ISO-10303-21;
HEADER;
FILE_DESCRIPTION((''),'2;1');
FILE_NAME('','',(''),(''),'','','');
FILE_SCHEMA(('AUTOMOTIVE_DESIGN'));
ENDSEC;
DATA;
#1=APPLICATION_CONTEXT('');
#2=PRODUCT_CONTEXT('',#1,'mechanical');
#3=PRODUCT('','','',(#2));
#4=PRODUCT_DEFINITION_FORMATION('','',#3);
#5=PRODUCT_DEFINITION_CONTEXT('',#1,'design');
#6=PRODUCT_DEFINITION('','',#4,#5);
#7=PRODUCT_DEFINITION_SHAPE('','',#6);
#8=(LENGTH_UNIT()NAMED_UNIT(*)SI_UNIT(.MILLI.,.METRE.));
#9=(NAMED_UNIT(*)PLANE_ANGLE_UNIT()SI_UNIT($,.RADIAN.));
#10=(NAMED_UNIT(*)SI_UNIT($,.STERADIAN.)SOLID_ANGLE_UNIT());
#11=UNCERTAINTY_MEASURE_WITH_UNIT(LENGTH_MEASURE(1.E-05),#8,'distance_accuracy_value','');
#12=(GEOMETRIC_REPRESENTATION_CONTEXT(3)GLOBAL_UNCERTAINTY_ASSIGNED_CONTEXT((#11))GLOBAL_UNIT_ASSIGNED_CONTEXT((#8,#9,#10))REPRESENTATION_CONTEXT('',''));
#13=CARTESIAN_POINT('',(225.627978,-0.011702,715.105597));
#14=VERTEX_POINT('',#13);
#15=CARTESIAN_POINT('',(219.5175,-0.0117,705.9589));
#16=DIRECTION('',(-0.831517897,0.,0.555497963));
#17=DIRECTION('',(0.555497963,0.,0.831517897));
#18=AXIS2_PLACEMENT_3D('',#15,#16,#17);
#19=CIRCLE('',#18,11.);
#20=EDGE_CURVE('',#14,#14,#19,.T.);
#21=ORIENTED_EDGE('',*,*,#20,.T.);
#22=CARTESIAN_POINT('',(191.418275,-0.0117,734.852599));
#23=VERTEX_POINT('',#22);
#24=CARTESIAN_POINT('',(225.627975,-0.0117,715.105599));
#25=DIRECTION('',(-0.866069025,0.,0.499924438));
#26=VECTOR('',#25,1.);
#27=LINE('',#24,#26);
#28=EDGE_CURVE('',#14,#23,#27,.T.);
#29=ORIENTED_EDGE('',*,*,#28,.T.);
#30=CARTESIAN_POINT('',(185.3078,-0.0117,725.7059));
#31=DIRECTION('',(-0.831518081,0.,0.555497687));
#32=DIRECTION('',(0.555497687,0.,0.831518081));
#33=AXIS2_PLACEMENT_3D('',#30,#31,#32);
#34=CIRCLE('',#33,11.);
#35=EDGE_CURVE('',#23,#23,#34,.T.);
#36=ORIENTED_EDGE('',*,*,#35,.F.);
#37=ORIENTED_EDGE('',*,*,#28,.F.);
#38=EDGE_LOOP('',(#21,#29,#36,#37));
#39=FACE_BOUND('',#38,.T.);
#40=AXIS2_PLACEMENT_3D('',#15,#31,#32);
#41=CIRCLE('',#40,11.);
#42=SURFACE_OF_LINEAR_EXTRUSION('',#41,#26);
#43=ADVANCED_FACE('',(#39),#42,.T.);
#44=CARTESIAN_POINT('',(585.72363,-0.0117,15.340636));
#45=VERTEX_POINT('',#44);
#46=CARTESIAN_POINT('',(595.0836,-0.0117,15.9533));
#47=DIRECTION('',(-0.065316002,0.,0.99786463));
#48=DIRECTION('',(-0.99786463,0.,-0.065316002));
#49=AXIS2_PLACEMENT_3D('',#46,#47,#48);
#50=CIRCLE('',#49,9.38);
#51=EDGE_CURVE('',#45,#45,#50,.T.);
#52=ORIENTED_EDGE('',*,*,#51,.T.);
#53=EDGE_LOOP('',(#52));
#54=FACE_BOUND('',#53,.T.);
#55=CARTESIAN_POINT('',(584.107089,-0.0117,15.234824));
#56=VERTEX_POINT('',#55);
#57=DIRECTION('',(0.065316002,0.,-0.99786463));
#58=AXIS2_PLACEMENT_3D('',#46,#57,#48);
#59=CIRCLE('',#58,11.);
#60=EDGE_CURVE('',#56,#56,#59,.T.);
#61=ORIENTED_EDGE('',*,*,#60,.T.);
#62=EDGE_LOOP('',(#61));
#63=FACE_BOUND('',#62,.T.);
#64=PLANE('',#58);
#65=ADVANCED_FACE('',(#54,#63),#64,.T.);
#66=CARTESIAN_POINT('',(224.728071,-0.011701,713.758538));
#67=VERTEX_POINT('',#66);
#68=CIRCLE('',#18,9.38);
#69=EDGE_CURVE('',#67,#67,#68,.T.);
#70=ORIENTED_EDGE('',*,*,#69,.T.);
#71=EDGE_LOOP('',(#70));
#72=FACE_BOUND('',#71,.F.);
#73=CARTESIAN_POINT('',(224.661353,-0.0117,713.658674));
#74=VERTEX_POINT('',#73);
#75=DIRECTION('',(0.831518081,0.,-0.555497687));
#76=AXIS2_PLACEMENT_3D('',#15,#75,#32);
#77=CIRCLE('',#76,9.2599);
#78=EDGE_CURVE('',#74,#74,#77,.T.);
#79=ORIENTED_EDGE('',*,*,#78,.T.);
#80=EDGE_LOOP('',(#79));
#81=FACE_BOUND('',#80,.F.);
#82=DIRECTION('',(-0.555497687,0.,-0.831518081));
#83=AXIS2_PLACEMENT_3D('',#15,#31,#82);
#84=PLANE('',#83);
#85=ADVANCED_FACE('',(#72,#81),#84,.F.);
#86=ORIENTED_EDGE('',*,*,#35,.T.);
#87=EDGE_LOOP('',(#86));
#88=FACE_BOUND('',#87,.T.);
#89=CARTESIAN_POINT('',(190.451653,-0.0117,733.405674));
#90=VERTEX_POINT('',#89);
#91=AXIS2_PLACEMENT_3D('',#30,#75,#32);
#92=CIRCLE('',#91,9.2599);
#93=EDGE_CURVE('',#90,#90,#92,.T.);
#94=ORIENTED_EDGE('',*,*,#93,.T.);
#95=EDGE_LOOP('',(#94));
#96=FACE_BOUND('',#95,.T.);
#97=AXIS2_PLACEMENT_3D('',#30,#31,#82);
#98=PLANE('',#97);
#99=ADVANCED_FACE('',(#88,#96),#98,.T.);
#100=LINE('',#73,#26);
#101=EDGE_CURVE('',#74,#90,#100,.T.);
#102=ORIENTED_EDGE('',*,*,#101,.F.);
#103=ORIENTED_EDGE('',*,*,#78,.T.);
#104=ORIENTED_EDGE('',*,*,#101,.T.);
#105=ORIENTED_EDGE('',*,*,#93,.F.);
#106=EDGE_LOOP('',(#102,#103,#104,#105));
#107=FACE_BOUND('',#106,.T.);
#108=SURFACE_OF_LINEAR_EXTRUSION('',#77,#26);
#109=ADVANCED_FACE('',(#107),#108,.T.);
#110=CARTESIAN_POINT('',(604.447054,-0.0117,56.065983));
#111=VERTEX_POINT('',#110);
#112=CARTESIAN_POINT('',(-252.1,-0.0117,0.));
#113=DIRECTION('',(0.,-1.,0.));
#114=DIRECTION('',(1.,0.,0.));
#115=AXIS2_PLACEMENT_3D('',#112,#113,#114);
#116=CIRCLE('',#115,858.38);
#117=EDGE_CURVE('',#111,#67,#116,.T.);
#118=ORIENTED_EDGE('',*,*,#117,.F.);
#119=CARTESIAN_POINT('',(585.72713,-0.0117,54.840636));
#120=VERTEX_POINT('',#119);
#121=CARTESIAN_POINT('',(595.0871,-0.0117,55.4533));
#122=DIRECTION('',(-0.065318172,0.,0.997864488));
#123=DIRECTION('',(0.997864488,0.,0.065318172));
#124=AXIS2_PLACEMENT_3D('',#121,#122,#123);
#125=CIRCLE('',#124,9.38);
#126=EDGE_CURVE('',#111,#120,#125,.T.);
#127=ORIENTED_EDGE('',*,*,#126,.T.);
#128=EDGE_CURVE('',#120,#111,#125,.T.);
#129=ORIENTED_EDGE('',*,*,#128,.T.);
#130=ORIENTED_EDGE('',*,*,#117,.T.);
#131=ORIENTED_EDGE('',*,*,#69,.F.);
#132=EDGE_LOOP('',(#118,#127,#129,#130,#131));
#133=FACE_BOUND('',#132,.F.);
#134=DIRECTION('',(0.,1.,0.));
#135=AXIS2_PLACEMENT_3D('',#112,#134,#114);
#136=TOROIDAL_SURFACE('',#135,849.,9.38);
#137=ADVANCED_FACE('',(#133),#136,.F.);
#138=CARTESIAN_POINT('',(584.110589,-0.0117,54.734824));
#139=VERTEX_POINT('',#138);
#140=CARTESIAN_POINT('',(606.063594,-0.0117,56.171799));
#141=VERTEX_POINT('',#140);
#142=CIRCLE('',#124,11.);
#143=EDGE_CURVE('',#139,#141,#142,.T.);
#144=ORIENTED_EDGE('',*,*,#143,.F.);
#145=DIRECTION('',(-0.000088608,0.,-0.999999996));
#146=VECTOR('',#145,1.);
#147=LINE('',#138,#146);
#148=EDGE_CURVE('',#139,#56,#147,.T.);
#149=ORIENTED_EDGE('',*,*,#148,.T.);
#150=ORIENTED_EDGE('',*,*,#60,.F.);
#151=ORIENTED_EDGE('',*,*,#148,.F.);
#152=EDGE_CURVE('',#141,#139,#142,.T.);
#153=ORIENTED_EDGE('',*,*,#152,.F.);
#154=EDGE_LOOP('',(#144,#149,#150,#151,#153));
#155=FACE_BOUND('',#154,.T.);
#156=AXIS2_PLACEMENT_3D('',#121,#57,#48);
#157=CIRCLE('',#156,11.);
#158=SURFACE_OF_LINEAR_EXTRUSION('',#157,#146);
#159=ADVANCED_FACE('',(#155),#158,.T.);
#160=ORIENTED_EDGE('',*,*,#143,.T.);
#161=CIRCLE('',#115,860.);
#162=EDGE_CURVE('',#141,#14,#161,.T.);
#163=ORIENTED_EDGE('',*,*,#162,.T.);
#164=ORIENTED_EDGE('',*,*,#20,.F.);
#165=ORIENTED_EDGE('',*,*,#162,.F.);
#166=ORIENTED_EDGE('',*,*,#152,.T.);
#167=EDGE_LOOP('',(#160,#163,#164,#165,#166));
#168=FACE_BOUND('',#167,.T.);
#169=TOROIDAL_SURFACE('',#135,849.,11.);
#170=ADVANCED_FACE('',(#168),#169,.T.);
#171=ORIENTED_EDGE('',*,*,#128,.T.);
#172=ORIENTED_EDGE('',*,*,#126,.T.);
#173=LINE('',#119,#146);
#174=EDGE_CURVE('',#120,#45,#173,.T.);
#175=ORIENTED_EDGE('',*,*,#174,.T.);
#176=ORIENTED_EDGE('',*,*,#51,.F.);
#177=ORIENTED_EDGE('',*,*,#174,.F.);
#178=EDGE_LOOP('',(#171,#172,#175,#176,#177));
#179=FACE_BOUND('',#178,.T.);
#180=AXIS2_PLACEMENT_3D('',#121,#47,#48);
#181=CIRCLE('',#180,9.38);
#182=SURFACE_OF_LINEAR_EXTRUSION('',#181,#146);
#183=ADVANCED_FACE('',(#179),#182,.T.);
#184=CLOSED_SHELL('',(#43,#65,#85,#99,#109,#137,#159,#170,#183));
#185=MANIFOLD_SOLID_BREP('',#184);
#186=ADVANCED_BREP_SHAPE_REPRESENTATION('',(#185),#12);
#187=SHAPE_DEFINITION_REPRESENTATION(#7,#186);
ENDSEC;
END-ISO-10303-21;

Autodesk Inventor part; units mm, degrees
ref_plane "YZ Plane" through (0, 0, 0) normal (1, 0, 0) x (0, 1, 0)
ref_plane "XZ Plane" through (0, 0, 0) normal (0, 1, 0) x (-1, 0, 0)
ref_plane "XY Plane" through (0, 0, 0) normal (0, 0, 1) x (1, 0, 0)
sketch "Sketch1" plane through (0, 0, 0) normal (0, 0, 1) x (1, 0, 0)
  circle A0 centre (596.9, -0.0117) radius 11
  line L0 (-252.1, 80.9625) -> (-252.1, -95.25)
  circle A1 centre (596.9, -0.0117) radius 9.38
  dimension "d6" = 22
  dimension "d7" = 849
  dimension "d9" = 1.62
revolve "Revolution1" add sketch "Sketch1" angle 60 about axis through (-252.1, 80.9625, 0) along (0, -1, 0)
sketch "Sketch4" plane through (0, 0, 0) normal (0, 1, 0) x (-1, 0, 0)
  line L0 (-607.9, 0) -> (-585.9, 0) projected
  line L1 (-607.9, 0) -> (252.1, 0) construction
  line L2 (252.1, 0) -> (-595.0871, 55.4533) construction
  line L3 (-177.9, 744.7818) -> (-166.9, 725.7293) projected
  line L4 (252.1, 0) -> (-177.9, 744.7818) construction
  line L5 (252.1, 0) -> (-225.628, 715.1056) construction
  arc A0 (-177.9, 744.7818) -> (-607.9, 0) centre (252.1, 0) ccw projected
  arc A1 (-595.0871, 55.4533) -> (-596.9, 0) centre (252.1, 0) ccw
  arc A2 (-172.4, 735.2556) -> (-219.5175, 705.9589) centre (252.1, 0) ccw
  point P0 (0, 0)
  dimension "d10" = 860
  dimension "d12" = 3.745
  dimension "d13" = 3.745
sketch "Sketch5" plane through (596.9, -0.0117, 0) normal (0, 0, -1) x (-1, 0, 0)
  circle A0 centre (0, 0) radius 9.38
  circle A1 centre (0, 0) radius 11
  point P0 (596.9, 0.0117)
sweep "Sweep1" cut profiles "Sketch5" path "Sketch4" path curves A1
sketch "Sketch6" plane through (172.4, -0.0117, 735.2556) normal (-0.8660254, 0, 0.5) x (0.5, 0, 0.8660254)
  circle A0 centre (0, 0) radius 9.38
  circle A1 centre (0, 0) radius 11
  point P0 (-722.95, 0.0117)
sweep "Sweep2" cut profiles "Sketch6" path "Sketch4" path curves A2
sketch "Sketch11" plane through (0, 0, 0) normal (0, 1, 0) x (-1, 0, 0)
  line L0 (-225.628, 715.1056) -> (-213.407, 696.8122) projected
  line L1 (-219.5175, 705.9589) -> (-185.3078, 725.7059)
  line L2 (-584.1106, 54.7348) -> (-606.0636, 56.1718) projected
  line L3 (-595.0871, 55.4533) -> (-595.0836, 15.9533)
  point P0 (0, 0)
  dimension "d26" = 39.5
  dimension "d32" = 93.75
  dimension "d33" = 39.5
  dimension "d34" = 93.75
sketch "Sketch12" plane through (219.5175, -0.0117, 705.9589) normal (-0.8315181, 0, 0.5554977) x (0.5554977, 0, 0.8315181)
  circle A0 centre (0, 0) radius 9.2599
  circle A1 centre (0, 0) radius 11
  point P0 (-708.959, 0.0117)
sweep "Sweep4" add profiles "Sketch12" path "Sketch11" path curves L1
sketch "Sketch13" plane through (595.0871, -0.0117, 55.4533) normal (0.065316, 0, -0.9978646) x (-0.9978646, 0, -0.065316)
  circle A0 centre (0, 0) radius 9.38
  circle A1 centre (0, 0) radius 11
  point P0 (597.4383, 0.0117)
sweep "Sweep5" add profiles "Sketch13" path "Sketch11" path curves L3
properties part number "2f2arc"
